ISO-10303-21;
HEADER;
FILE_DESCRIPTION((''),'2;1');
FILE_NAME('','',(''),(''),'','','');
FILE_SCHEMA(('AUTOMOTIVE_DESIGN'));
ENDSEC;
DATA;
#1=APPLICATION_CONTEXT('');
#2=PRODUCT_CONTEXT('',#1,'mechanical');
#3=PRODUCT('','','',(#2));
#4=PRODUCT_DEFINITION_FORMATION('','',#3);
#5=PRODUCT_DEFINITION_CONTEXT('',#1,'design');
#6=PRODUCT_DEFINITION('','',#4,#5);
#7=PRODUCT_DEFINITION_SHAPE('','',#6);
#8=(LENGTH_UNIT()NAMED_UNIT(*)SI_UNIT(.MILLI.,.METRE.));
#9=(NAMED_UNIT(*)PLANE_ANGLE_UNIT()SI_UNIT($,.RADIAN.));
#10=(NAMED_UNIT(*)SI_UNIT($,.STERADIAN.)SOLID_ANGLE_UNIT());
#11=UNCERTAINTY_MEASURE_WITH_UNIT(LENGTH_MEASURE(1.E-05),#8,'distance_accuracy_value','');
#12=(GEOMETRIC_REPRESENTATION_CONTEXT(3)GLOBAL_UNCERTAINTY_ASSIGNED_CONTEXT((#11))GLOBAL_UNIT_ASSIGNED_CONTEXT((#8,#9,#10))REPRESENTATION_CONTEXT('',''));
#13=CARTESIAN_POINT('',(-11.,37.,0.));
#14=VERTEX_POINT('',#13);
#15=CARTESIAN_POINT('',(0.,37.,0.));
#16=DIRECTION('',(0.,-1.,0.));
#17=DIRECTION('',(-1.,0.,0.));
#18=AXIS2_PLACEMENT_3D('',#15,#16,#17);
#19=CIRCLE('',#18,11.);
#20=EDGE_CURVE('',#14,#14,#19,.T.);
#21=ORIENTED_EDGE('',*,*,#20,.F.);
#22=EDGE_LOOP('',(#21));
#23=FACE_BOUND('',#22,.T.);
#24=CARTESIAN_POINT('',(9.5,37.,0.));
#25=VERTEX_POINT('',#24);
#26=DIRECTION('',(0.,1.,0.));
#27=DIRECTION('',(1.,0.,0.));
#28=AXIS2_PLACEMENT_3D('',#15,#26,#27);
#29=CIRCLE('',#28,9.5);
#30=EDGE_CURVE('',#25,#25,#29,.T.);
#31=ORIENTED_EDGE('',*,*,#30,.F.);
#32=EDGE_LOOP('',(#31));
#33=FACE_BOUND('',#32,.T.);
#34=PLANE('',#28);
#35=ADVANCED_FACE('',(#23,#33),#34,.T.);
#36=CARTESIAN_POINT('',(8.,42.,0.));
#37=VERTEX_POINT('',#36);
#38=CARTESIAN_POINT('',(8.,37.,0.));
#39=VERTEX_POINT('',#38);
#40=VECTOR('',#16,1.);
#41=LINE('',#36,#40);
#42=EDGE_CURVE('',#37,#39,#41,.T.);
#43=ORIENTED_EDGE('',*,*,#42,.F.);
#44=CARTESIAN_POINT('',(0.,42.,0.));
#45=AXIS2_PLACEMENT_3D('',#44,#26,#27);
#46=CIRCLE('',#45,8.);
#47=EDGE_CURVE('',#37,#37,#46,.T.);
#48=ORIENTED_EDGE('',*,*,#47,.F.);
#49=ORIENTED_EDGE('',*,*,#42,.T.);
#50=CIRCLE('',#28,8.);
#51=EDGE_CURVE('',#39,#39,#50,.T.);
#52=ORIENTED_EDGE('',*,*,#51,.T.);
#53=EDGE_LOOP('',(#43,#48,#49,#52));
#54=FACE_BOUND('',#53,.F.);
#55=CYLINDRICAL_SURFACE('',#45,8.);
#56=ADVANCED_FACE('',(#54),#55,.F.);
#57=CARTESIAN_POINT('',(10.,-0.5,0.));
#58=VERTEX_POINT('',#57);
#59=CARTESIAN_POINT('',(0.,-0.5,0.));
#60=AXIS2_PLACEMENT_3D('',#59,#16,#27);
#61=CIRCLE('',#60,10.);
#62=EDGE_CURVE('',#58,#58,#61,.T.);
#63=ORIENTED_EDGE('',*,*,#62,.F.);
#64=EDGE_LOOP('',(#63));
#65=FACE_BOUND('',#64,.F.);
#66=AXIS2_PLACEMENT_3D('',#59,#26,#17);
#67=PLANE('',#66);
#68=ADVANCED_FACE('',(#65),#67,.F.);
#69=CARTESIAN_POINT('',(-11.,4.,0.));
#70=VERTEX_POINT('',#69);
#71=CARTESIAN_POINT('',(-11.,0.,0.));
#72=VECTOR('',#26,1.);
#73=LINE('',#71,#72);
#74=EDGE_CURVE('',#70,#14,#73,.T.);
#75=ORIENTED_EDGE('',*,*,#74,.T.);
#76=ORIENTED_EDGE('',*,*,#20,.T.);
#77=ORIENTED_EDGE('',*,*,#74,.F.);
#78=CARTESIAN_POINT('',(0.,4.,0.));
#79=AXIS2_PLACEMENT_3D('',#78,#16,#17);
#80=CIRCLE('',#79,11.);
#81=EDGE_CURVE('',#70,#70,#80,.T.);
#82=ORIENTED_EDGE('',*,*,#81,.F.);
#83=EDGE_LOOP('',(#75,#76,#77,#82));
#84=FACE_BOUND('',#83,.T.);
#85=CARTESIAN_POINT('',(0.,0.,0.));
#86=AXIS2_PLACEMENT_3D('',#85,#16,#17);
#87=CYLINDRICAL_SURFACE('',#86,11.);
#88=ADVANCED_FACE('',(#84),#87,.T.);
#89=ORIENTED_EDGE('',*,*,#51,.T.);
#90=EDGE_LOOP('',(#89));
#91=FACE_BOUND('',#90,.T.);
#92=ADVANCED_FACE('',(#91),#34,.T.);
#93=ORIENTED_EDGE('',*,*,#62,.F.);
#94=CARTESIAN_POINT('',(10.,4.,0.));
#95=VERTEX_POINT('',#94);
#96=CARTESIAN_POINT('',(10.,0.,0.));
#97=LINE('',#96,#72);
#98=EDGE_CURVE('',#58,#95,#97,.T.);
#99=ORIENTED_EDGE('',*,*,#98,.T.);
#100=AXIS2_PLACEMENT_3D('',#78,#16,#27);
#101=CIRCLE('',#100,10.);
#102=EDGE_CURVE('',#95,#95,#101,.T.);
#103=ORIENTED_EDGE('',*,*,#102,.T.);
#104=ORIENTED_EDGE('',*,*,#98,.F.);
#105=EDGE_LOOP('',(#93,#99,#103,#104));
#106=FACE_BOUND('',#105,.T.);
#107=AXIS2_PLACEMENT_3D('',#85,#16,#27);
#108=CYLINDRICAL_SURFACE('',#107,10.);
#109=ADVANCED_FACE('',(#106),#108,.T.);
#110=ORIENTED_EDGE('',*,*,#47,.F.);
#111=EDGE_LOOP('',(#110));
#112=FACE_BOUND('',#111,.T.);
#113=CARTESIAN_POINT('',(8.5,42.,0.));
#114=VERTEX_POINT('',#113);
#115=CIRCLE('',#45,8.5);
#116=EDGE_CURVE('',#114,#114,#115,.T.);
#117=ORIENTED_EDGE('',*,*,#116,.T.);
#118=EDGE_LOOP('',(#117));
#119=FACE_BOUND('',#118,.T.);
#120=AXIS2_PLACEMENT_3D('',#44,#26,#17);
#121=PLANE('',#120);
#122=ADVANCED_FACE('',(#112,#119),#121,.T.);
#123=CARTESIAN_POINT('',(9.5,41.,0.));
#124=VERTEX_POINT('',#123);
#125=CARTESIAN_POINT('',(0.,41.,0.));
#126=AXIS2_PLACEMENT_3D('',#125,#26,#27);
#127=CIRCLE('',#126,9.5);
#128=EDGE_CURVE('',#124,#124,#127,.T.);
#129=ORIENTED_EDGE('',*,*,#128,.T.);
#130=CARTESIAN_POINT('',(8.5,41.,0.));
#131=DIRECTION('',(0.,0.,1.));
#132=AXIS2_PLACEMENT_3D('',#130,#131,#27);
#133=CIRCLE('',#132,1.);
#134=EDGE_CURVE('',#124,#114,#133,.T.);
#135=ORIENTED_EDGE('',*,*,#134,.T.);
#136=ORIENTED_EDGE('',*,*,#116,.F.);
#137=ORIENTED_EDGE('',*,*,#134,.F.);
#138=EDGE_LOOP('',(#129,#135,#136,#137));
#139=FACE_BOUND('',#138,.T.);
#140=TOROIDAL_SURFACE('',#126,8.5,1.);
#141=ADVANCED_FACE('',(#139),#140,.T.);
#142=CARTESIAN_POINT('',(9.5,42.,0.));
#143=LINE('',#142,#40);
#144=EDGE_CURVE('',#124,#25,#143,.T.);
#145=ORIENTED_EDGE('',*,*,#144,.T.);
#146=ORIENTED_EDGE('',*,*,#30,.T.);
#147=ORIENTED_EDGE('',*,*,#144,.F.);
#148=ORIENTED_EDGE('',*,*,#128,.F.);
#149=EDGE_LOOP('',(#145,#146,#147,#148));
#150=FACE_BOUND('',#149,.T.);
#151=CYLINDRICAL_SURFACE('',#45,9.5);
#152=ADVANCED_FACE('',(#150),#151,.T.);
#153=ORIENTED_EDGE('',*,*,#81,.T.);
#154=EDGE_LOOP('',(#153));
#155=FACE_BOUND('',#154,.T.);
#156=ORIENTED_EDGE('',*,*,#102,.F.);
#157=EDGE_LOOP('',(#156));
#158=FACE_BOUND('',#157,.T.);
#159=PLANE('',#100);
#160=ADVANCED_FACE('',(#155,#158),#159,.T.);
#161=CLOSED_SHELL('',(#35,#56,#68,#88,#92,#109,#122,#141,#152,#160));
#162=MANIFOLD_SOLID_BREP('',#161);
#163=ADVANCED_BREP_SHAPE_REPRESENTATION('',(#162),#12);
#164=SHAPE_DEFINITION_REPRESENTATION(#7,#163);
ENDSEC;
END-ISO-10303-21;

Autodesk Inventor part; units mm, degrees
ref_plane "YZ Plane" through (0, 0, 0) normal (1, 0, 0) x (0, 1, 0)
ref_plane "XZ Plane" through (0, 0, 0) normal (0, 1, 0) x (-1, 0, 0)
ref_plane "XY Plane" through (0, 0, 0) normal (0, 0, 1) x (1, 0, 0)
sketch "Sketch1" plane through (0, 0, 0) normal (0, 1, 0) x (-1, 0, 0)
  circle A0 centre (0, 0) radius 12
  dimension "d0" = 24
extrude "Extrusion1" add sketch "Sketch1" along normal blind 42
sketch "Sketch2" plane through (0, 0, 0) normal (0, -1, 0) x (1, 0, 0)
  circle A0 centre (0, 0) radius 10
  circle A1 centre (0, 0) radius 12 projected
  dimension "d3" = 20
extrude "Extrusion2" cut sketch "Sketch2" against normal blind 4
sketch "Sketch3" plane through (0, 42, 0) normal (0, 1, 0) x (1, 0, 0)
  circle A0 centre (0, 0) radius 9.5
  circle A1 centre (0, 0) radius 12 projected
  dimension "d6" = 19
extrude "Extrusion3" cut sketch "Sketch3" against normal blind 3
move faces "Move1" translate (0, -0.5, 0) faces at (-3.2365, 0, -3.6231)
offset faces "Size1" outward -1 faces at (-11.9611, 15.6667, 0.9656)
move faces "Move2" translate (0, -2, 0) faces at (-10.3014, 39, 1.6353)
sketch "Sketch5" plane through (0, 42, 0) normal (0, 1, 0) x (1, 0, 0)
  circle A0 centre (0, 0) radius 8
  circle A1 centre (0, 0) radius 9.5 projected
  dimension "d20" = 16
extrude "Extrusion5" cut sketch "Sketch5" against normal blind 5 contours A0
fillet "Fillet2" radius 1 1 edges at (-9.5, 42, 0)
properties part number "10x Obj Lens Finite 160mm"
